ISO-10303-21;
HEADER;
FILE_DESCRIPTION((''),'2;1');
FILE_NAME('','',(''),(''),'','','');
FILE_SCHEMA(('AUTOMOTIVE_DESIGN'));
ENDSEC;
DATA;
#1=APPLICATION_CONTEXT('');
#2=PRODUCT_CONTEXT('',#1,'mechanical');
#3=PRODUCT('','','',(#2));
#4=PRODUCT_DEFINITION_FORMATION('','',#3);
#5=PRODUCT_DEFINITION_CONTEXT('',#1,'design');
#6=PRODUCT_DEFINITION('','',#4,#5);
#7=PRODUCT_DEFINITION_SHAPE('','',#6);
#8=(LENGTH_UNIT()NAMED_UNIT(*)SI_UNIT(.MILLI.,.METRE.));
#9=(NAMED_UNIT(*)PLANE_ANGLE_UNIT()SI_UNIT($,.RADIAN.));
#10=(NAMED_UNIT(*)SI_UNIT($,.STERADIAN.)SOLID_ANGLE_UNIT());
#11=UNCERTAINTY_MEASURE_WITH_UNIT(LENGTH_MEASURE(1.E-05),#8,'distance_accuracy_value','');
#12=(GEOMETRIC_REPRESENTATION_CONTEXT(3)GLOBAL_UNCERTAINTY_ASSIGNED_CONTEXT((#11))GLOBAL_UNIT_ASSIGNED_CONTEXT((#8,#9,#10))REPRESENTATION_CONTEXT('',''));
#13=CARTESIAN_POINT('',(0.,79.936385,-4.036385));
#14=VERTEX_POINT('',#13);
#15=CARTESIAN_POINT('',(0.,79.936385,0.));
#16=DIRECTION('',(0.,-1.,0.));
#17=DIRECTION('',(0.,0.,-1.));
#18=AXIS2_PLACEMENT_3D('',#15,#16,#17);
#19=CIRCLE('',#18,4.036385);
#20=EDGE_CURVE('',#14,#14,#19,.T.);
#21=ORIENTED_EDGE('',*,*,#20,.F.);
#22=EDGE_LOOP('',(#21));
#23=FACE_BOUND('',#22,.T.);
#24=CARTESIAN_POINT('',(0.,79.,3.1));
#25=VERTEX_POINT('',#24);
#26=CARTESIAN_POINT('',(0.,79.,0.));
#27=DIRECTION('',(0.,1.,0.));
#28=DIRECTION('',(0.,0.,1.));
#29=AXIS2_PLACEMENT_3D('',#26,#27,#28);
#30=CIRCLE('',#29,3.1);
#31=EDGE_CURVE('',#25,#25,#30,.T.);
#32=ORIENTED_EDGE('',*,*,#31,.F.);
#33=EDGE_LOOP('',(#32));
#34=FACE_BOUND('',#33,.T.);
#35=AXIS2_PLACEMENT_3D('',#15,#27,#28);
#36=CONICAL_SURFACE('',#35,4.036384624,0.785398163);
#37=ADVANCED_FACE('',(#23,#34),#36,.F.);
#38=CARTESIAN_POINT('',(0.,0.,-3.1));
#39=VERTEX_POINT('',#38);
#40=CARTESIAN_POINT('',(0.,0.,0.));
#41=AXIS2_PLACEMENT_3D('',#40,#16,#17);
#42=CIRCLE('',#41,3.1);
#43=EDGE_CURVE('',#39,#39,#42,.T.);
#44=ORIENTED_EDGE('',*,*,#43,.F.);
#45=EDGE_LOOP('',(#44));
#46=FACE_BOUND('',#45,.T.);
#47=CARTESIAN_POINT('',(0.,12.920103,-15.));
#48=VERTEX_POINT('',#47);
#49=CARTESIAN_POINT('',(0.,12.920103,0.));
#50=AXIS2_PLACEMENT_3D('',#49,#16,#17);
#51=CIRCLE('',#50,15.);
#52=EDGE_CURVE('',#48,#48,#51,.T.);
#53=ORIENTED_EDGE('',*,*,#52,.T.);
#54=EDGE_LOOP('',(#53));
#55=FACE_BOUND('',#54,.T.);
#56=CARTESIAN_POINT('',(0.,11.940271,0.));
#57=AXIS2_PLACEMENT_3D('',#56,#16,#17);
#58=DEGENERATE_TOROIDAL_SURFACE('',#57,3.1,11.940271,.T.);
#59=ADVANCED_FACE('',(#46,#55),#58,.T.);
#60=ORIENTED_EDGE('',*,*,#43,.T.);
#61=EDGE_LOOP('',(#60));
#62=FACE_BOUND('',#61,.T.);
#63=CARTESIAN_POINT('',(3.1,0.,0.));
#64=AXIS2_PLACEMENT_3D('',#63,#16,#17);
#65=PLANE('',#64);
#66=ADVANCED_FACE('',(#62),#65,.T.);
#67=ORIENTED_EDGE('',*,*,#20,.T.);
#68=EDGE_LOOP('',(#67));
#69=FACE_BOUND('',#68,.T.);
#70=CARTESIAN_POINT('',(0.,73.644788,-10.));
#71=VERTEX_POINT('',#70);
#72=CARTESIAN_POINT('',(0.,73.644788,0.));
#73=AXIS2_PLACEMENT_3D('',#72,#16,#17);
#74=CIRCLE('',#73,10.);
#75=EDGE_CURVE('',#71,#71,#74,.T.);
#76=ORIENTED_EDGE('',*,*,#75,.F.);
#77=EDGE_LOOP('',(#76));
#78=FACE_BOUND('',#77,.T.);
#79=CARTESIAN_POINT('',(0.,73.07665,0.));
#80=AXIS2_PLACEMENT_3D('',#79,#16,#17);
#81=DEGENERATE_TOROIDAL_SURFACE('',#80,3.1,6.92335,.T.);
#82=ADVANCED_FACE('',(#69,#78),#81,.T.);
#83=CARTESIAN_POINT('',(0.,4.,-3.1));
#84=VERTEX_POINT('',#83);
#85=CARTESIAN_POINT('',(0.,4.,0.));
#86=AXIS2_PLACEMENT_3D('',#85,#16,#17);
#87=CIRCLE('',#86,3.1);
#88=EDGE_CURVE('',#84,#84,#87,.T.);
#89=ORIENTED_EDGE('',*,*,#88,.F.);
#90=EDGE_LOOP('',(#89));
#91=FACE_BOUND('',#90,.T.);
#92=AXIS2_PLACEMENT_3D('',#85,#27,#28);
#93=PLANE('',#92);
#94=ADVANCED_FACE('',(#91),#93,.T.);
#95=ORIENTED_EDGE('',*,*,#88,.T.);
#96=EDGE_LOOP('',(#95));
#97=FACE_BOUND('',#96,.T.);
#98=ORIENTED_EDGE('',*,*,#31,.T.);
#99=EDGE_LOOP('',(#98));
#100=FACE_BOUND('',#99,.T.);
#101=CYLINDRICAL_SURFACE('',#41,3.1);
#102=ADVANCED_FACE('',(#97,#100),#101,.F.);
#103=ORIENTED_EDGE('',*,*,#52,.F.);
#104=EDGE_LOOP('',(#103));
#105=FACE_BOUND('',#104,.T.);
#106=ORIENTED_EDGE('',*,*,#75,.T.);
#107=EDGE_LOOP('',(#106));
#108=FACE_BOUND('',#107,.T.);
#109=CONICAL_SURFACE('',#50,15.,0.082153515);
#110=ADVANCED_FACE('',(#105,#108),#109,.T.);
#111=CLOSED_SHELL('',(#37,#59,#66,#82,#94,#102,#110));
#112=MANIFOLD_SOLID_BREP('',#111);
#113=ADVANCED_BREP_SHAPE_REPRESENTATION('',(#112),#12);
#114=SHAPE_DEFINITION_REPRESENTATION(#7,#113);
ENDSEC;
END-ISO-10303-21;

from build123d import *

# Parameters (mm, degrees)
CHANFREIN1_SIZE = 1


with BuildPart() as part:
    # Esquisse1 → Révolution1 (revolve)
    with BuildSketch(Plane.XY, mode=Mode.PRIVATE) as r_volution1_sk:
        with BuildLine():
            Line((15, 12.920103162), (10, 73.644787587))
            ThreePointArc((10, 73.644787587), (7.790381776, 78.16910476), (3.1, 80))
            Line((3.1, 80), (3.1, 4))
            Line((3.1, 4), (0, 4))
            Line((0, 4), (0, 0))
            Line((0, 0), (3.1, 0))
            ThreePointArc((3.1, 0), (11.882640061, 3.851061831), (15, 12.920103162))
        make_face()
    revolve(r_volution1_sk.sketch.rotate(Axis((0, 0, 0), (0, 1, 0)), 90), axis=Axis((0, 0, 0), (0, 1, 0)))

    # Chanfrein1
    # the kernel refuses this chamfer: 1 mm, written as the material it takes off along each edge
    with BuildSketch(Plane(origin=(0, 80, 0), x_dir=(0, 0, -1), z_dir=(1, 0, 0))) as chanfrein1_piece_1:
        with BuildLine():
            Line((4.036384624, -0.063615376), (3.1, -CHANFREIN1_SIZE))
            Line((3.1, -CHANFREIN1_SIZE), (3.1, 0))
            ThreePointArc((3.1, 0), (3.582393079, -0.016826116), (4.036384624, -0.063615376))
        make_face()
    revolve(axis=Axis((0, 80, 0), (0, 1, 0)), mode=Mode.SUBTRACT)


solid = part.part
